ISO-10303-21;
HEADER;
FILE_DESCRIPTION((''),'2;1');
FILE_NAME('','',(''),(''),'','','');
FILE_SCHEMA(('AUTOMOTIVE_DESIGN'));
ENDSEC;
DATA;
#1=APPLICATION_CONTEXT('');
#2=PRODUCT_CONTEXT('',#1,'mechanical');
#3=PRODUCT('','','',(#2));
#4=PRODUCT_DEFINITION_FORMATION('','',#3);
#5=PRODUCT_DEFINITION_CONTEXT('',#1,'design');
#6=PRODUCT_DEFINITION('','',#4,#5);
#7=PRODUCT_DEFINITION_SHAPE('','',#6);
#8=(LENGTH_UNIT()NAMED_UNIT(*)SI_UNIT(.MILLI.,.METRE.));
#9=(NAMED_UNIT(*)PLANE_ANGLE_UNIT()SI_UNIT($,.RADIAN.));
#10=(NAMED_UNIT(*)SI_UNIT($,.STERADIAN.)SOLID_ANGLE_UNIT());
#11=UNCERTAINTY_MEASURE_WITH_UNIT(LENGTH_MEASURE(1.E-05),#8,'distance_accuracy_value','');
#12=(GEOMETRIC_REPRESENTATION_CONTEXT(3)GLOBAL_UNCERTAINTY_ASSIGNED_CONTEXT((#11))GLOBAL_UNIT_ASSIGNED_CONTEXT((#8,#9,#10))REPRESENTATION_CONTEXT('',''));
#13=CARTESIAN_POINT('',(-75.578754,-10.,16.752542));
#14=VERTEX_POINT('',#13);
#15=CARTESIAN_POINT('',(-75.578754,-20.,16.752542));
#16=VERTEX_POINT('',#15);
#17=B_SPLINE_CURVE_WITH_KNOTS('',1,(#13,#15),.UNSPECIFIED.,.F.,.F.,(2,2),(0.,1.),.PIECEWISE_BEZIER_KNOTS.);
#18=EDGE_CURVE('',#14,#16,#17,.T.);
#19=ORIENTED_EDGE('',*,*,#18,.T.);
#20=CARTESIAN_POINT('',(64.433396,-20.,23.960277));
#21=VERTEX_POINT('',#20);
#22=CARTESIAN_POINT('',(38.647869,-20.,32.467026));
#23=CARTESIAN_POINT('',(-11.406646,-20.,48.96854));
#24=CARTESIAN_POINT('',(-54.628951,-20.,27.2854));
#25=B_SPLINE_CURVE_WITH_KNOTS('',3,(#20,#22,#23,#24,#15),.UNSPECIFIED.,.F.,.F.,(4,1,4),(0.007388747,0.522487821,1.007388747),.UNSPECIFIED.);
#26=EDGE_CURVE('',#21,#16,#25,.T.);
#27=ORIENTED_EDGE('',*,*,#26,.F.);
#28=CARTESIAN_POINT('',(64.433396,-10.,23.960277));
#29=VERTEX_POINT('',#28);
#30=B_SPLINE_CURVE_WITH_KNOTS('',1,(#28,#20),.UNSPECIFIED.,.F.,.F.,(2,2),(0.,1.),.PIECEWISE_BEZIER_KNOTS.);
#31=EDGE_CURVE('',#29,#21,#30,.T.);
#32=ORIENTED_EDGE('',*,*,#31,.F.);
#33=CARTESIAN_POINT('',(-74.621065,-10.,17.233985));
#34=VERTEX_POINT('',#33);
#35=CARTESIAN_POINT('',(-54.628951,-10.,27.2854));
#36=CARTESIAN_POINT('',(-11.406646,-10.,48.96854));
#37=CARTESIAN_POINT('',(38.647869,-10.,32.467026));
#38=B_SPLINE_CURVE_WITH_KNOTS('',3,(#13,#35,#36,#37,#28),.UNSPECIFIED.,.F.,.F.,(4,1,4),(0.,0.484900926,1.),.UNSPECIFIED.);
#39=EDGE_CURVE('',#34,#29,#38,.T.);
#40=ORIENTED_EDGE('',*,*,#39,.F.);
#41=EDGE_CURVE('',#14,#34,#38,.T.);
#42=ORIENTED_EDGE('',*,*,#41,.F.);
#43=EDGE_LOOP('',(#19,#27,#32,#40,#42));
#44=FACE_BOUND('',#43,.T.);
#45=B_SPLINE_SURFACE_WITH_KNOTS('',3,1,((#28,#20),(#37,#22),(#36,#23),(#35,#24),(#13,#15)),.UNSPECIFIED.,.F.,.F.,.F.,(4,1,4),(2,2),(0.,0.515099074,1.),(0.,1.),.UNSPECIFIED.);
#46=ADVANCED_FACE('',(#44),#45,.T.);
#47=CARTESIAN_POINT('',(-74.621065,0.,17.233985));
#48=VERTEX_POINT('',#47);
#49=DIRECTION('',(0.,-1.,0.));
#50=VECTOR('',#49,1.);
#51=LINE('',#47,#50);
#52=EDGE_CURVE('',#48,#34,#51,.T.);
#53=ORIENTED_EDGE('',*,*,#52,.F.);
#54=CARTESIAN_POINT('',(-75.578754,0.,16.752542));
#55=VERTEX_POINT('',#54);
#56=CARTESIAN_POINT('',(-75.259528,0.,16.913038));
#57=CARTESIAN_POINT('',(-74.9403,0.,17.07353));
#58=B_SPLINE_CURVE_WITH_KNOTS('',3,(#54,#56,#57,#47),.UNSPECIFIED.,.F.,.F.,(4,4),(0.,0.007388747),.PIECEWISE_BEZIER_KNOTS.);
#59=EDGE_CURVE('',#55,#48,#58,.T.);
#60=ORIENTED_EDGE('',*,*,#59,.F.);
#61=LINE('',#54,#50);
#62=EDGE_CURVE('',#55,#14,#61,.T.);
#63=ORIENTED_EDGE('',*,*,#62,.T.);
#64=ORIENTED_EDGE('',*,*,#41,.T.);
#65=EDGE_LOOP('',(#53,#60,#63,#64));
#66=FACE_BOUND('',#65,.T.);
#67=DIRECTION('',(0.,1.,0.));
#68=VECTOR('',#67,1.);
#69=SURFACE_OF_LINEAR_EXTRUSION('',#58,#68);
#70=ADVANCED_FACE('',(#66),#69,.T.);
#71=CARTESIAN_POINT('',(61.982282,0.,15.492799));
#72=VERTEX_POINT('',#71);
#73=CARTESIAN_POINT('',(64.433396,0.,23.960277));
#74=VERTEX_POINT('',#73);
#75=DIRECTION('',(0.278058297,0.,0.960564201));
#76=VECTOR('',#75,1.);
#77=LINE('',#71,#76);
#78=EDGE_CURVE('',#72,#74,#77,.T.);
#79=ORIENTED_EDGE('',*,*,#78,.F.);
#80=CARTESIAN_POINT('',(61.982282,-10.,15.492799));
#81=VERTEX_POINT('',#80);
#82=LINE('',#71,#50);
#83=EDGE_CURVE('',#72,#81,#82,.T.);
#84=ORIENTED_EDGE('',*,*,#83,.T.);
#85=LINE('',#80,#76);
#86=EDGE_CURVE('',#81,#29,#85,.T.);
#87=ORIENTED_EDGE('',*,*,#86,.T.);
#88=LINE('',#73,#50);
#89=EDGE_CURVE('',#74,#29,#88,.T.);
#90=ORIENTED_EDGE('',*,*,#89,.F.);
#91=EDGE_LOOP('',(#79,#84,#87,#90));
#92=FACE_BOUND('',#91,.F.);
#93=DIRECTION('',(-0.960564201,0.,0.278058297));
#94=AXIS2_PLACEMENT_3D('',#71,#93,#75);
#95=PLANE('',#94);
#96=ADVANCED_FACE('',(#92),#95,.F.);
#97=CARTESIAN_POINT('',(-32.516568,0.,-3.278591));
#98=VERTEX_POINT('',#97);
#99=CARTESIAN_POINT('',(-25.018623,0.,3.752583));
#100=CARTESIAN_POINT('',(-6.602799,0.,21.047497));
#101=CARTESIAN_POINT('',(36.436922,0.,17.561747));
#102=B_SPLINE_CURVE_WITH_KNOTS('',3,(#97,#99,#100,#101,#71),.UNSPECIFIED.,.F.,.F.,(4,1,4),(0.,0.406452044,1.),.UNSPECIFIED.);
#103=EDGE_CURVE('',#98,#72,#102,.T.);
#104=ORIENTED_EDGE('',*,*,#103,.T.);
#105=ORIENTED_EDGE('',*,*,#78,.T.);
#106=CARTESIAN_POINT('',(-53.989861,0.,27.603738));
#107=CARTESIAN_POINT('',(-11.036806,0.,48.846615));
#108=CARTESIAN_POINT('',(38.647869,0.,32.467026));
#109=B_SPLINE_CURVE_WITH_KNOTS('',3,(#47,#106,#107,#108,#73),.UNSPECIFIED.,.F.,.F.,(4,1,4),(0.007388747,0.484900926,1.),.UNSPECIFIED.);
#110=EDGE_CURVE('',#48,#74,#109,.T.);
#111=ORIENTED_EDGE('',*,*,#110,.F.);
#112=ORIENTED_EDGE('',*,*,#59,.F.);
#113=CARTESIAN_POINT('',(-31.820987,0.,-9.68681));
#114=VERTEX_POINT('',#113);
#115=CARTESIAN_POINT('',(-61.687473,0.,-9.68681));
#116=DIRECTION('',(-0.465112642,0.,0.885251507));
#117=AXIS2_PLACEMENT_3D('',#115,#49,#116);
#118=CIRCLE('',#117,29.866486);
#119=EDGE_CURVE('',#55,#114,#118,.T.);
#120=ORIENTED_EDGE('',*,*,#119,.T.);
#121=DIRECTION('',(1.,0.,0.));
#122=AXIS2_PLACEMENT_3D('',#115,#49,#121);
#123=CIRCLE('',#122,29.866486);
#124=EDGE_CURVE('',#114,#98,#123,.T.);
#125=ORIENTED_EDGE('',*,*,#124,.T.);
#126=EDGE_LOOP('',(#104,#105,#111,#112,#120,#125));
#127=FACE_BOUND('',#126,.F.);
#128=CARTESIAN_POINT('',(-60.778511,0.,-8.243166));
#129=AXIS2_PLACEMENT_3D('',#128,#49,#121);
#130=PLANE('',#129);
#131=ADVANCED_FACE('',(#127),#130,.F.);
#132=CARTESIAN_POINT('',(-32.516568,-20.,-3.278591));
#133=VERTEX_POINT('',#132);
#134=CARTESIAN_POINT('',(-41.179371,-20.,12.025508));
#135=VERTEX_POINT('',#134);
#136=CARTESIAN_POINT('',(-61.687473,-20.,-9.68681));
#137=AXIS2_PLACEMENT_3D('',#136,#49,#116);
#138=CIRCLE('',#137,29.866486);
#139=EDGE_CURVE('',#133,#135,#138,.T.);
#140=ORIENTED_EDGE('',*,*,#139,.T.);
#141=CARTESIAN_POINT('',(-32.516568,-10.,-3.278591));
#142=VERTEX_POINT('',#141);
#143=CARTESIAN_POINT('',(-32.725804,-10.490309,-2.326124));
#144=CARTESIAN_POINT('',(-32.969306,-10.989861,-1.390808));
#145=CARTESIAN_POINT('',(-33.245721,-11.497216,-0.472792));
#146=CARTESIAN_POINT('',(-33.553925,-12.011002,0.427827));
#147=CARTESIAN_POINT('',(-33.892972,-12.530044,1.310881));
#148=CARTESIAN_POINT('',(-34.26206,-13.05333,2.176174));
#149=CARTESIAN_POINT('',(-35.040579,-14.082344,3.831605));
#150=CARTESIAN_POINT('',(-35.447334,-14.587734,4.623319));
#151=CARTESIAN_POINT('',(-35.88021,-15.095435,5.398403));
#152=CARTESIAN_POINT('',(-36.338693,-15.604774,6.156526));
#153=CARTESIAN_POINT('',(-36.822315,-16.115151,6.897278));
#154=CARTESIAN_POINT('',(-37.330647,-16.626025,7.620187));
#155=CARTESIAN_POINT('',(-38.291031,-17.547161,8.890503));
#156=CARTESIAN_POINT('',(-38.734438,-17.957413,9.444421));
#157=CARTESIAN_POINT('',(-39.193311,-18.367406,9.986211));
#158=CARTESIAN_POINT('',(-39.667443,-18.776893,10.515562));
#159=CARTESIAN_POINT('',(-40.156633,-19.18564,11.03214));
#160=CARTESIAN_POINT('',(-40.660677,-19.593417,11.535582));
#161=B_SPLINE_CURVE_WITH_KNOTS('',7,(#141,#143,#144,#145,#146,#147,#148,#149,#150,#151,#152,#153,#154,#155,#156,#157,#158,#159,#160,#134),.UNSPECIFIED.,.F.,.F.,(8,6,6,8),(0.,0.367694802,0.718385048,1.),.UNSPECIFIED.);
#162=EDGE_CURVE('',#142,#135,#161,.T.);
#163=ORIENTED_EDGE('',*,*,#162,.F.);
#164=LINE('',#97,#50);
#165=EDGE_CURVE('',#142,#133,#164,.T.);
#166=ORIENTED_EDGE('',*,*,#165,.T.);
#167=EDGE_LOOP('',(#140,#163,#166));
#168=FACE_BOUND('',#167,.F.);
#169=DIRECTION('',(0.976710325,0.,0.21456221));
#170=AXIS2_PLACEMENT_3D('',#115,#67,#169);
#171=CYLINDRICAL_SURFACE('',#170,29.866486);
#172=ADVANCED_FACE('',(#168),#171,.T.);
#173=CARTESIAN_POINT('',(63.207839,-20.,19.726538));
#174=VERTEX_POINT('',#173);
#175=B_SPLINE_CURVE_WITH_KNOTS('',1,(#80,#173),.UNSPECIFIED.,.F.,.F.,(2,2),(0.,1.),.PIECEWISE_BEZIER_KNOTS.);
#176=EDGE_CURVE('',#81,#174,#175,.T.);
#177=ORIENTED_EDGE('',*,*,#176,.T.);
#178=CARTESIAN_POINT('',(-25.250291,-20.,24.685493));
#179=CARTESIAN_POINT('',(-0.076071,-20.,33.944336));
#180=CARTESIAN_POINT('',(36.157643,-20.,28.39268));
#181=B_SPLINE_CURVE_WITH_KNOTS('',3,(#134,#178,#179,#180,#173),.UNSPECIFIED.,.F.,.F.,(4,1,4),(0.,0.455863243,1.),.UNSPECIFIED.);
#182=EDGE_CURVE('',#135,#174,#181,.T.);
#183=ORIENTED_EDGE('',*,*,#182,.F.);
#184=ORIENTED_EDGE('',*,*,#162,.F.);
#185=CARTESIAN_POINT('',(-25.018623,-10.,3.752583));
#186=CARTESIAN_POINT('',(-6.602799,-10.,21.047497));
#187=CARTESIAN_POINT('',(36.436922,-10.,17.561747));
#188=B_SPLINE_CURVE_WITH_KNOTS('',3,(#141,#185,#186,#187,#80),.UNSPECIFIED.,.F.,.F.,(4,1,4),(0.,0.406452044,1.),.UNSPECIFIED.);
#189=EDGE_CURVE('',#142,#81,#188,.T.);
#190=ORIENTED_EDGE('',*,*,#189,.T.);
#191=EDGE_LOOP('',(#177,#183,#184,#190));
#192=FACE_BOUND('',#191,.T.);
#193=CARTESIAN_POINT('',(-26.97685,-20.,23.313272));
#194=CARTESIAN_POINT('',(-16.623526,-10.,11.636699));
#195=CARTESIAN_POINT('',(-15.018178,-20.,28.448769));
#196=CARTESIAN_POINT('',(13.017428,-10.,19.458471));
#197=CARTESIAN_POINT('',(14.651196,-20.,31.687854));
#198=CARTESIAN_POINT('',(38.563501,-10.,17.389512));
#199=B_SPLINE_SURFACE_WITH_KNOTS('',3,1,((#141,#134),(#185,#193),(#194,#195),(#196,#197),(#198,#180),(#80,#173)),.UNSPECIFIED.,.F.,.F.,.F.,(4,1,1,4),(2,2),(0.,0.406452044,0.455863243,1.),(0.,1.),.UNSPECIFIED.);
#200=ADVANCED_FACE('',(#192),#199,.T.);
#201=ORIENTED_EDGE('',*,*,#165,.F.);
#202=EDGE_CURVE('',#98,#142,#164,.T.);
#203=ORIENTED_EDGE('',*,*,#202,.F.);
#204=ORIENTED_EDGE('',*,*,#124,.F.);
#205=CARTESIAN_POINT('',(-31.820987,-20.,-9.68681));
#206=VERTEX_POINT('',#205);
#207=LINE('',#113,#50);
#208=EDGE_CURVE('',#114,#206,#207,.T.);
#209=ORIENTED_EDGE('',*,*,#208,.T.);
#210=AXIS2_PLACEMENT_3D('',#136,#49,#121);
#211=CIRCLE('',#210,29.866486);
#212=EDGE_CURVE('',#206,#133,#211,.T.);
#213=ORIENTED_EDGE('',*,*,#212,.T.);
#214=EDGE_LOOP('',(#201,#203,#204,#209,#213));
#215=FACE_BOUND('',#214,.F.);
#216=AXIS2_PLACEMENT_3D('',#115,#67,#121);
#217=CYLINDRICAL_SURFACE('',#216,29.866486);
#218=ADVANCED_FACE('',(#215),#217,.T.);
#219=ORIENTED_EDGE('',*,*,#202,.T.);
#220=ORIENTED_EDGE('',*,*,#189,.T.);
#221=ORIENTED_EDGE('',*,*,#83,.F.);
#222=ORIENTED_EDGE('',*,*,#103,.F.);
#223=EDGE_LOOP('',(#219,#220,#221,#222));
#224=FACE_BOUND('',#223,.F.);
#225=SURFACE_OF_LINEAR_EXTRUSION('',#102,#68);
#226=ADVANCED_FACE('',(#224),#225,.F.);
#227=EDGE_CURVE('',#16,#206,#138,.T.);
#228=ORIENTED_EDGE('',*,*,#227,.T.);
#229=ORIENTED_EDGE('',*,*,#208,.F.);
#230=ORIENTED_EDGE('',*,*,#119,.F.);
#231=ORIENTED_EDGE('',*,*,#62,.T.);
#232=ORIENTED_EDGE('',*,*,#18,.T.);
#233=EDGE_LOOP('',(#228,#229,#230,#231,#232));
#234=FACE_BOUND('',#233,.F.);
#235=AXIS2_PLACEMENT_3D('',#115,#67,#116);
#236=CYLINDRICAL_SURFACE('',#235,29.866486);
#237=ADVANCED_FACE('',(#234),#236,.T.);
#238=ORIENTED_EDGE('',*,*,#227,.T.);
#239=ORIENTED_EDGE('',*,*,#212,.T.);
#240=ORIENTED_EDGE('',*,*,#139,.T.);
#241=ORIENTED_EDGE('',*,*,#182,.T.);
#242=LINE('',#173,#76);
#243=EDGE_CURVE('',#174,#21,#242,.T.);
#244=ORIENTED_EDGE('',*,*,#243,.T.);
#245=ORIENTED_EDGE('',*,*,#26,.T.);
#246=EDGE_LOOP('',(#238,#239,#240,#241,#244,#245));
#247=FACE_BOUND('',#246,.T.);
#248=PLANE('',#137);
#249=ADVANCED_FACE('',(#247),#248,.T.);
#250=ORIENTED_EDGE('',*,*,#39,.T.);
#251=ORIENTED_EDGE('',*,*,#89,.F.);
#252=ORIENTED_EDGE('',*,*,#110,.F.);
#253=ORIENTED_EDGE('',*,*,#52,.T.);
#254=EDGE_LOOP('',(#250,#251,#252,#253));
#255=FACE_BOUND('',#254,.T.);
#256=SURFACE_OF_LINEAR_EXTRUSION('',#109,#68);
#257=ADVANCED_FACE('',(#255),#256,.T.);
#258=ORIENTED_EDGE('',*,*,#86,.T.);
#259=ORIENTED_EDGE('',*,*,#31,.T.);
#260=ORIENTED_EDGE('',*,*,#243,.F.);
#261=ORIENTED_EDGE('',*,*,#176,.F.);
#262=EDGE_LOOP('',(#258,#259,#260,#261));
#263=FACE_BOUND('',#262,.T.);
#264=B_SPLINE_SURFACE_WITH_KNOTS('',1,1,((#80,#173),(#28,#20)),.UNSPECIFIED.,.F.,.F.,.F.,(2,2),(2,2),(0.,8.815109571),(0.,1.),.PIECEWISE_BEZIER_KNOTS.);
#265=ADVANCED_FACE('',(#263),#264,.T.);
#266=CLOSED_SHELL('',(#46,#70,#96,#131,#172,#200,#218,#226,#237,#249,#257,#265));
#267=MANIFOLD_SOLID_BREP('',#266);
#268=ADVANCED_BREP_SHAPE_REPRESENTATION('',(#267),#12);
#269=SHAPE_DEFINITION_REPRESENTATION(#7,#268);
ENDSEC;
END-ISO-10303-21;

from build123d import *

# Parameters (mm, degrees)
F6_DEPTH = 10
F7_DEPTH = 20


# Not quite as in the source:
# - the dataset's text gives a spline's control points without its knots; the knots are read off the source's solid


with BuildPart() as f5:
    # F3 (on offset) → F5 section 0
    with BuildSketch(Plane.XZ.offset(10)):
        with BuildLine():
            ThreePointArc((-75.5787535417, 16.7525420321), (-74.2842309522, -36.7668523877), (-32.5165676908, -3.2785906609))
            add(Edge.make_bspline(
                [(-32.5165676908, -3.2785906609), (-25.0186225888, 3.7525831829), (-6.6027990329, 21.0474968683), (36.4369216658, 17.5617465832), (61.9822815061, 15.4927987605)],
                knots=[0, 0, 0, 0, 0.406452044, 1, 1, 1, 1], degree=3))
            Line((61.9822815061, 15.4927987605), (64.4333958626, 23.9602774382))
            add(Edge.make_bspline(
                [(-75.5787535417, 16.7525420321), (-54.628951456, 27.285399841), (-11.406645731, 48.9685404457), (38.647869417, 32.4670255034), (64.4333958626, 23.9602774382)],
                knots=[0, 0, 0, 0, 0.4849009259, 1, 1, 1, 1], degree=3))
        make_face()
    # F4 (on offset) → F5 section 1
    with BuildSketch(Plane.XZ.offset(20)):
        with BuildLine():
            add(Edge.make_bspline(
                [(-75.5787535417, 16.7525420321), (-54.628951456, 27.285399841), (-11.406645731, 48.9685404457), (38.647869417, 32.4670255034), (64.4333958626, 23.9602774382)],
                knots=[0, 0, 0, 0, 0.4849009259, 1, 1, 1, 1], degree=3))
            ThreePointArc((-75.5787535417, 16.7525420321), (-65.7534042192, -39.2752402765), (-41.1793711539, 12.0255080478))
            add(Edge.make_bspline(
                [(-41.1793711539, 12.0255080478), (-25.2502910967, 24.6854926251), (-0.0760708598, 33.9443363857), (36.1576432322, 28.3926800744), (63.2078386843, 19.7265380993)],
                knots=[0, 0, 0, 0, 0.4558632428, 1, 1, 1, 1], degree=3))
            Line((63.2078386843, 19.7265380993), (64.4333958626, 23.9602774382))
        make_face()
    loft()

    # F0 (on Front) → F6 (join)
    with BuildSketch(Plane.XZ):
        with BuildLine():
            ThreePointArc((-74.6210650057, 17.2339850929), (-48.6067992872, 17.1628264037), (-32.5165676908, -3.2785906609))
            add(Edge.make_bspline(
                [(-32.5165676908, -3.2785906609), (-25.0186225888, 3.7525831829), (-6.6027990329, 21.0474968683), (36.4369216658, 17.5617465832), (61.9822815061, 15.4927987605)],
                knots=[0, 0, 0, 0, 0.406452044, 1, 1, 1, 1], degree=3))
            Line((61.9822815061, 15.4927987605), (64.4333958626, 23.9602774382))
            add(Edge.make_bspline(
                [(-74.6210650057, 17.2339850929), (-53.9898610909, 27.6037376874), (-11.0368055784, 48.8466149254), (38.647869417, 32.4670255034), (64.4333958626, 23.9602774382)],
                knots=[0.0073887471, 0.0073887471, 0.0073887471, 0.0073887471, 0.4849009259, 1, 1, 1, 1], degree=3))
        make_face()
    extrude(amount=F6_DEPTH)

    # F0 (on Front) → F7 (join)
    with BuildSketch(Plane.XZ):
        with BuildLine():
            ThreePointArc((-75.5787535417, 16.7525420321), (-77.1329137918, -35.2493874652), (-31.8209869176, -9.6868099645))
            ThreePointArc((-31.8209869176, -9.6868099645), (-31.9953913254, -6.4638801151), (-32.5165676908, -3.2785906609))
            ThreePointArc((-32.5165676908, -3.2785906609), (-48.6067992872, 17.1628264037), (-74.6210650057, 17.2339850929))
            add(Edge.make_bspline(
                [(-75.5787535417, 16.7525420321), (-75.2595279418, 16.9130379566), (-74.940300314, 17.0735295431), (-74.6210650057, 17.2339850929)],
                knots=[0, 0, 0, 0, 0.0073887471, 0.0073887471, 0.0073887471, 0.0073887471], degree=3))
        make_face()
    extrude(amount=F7_DEPTH)


solid = f5.part
